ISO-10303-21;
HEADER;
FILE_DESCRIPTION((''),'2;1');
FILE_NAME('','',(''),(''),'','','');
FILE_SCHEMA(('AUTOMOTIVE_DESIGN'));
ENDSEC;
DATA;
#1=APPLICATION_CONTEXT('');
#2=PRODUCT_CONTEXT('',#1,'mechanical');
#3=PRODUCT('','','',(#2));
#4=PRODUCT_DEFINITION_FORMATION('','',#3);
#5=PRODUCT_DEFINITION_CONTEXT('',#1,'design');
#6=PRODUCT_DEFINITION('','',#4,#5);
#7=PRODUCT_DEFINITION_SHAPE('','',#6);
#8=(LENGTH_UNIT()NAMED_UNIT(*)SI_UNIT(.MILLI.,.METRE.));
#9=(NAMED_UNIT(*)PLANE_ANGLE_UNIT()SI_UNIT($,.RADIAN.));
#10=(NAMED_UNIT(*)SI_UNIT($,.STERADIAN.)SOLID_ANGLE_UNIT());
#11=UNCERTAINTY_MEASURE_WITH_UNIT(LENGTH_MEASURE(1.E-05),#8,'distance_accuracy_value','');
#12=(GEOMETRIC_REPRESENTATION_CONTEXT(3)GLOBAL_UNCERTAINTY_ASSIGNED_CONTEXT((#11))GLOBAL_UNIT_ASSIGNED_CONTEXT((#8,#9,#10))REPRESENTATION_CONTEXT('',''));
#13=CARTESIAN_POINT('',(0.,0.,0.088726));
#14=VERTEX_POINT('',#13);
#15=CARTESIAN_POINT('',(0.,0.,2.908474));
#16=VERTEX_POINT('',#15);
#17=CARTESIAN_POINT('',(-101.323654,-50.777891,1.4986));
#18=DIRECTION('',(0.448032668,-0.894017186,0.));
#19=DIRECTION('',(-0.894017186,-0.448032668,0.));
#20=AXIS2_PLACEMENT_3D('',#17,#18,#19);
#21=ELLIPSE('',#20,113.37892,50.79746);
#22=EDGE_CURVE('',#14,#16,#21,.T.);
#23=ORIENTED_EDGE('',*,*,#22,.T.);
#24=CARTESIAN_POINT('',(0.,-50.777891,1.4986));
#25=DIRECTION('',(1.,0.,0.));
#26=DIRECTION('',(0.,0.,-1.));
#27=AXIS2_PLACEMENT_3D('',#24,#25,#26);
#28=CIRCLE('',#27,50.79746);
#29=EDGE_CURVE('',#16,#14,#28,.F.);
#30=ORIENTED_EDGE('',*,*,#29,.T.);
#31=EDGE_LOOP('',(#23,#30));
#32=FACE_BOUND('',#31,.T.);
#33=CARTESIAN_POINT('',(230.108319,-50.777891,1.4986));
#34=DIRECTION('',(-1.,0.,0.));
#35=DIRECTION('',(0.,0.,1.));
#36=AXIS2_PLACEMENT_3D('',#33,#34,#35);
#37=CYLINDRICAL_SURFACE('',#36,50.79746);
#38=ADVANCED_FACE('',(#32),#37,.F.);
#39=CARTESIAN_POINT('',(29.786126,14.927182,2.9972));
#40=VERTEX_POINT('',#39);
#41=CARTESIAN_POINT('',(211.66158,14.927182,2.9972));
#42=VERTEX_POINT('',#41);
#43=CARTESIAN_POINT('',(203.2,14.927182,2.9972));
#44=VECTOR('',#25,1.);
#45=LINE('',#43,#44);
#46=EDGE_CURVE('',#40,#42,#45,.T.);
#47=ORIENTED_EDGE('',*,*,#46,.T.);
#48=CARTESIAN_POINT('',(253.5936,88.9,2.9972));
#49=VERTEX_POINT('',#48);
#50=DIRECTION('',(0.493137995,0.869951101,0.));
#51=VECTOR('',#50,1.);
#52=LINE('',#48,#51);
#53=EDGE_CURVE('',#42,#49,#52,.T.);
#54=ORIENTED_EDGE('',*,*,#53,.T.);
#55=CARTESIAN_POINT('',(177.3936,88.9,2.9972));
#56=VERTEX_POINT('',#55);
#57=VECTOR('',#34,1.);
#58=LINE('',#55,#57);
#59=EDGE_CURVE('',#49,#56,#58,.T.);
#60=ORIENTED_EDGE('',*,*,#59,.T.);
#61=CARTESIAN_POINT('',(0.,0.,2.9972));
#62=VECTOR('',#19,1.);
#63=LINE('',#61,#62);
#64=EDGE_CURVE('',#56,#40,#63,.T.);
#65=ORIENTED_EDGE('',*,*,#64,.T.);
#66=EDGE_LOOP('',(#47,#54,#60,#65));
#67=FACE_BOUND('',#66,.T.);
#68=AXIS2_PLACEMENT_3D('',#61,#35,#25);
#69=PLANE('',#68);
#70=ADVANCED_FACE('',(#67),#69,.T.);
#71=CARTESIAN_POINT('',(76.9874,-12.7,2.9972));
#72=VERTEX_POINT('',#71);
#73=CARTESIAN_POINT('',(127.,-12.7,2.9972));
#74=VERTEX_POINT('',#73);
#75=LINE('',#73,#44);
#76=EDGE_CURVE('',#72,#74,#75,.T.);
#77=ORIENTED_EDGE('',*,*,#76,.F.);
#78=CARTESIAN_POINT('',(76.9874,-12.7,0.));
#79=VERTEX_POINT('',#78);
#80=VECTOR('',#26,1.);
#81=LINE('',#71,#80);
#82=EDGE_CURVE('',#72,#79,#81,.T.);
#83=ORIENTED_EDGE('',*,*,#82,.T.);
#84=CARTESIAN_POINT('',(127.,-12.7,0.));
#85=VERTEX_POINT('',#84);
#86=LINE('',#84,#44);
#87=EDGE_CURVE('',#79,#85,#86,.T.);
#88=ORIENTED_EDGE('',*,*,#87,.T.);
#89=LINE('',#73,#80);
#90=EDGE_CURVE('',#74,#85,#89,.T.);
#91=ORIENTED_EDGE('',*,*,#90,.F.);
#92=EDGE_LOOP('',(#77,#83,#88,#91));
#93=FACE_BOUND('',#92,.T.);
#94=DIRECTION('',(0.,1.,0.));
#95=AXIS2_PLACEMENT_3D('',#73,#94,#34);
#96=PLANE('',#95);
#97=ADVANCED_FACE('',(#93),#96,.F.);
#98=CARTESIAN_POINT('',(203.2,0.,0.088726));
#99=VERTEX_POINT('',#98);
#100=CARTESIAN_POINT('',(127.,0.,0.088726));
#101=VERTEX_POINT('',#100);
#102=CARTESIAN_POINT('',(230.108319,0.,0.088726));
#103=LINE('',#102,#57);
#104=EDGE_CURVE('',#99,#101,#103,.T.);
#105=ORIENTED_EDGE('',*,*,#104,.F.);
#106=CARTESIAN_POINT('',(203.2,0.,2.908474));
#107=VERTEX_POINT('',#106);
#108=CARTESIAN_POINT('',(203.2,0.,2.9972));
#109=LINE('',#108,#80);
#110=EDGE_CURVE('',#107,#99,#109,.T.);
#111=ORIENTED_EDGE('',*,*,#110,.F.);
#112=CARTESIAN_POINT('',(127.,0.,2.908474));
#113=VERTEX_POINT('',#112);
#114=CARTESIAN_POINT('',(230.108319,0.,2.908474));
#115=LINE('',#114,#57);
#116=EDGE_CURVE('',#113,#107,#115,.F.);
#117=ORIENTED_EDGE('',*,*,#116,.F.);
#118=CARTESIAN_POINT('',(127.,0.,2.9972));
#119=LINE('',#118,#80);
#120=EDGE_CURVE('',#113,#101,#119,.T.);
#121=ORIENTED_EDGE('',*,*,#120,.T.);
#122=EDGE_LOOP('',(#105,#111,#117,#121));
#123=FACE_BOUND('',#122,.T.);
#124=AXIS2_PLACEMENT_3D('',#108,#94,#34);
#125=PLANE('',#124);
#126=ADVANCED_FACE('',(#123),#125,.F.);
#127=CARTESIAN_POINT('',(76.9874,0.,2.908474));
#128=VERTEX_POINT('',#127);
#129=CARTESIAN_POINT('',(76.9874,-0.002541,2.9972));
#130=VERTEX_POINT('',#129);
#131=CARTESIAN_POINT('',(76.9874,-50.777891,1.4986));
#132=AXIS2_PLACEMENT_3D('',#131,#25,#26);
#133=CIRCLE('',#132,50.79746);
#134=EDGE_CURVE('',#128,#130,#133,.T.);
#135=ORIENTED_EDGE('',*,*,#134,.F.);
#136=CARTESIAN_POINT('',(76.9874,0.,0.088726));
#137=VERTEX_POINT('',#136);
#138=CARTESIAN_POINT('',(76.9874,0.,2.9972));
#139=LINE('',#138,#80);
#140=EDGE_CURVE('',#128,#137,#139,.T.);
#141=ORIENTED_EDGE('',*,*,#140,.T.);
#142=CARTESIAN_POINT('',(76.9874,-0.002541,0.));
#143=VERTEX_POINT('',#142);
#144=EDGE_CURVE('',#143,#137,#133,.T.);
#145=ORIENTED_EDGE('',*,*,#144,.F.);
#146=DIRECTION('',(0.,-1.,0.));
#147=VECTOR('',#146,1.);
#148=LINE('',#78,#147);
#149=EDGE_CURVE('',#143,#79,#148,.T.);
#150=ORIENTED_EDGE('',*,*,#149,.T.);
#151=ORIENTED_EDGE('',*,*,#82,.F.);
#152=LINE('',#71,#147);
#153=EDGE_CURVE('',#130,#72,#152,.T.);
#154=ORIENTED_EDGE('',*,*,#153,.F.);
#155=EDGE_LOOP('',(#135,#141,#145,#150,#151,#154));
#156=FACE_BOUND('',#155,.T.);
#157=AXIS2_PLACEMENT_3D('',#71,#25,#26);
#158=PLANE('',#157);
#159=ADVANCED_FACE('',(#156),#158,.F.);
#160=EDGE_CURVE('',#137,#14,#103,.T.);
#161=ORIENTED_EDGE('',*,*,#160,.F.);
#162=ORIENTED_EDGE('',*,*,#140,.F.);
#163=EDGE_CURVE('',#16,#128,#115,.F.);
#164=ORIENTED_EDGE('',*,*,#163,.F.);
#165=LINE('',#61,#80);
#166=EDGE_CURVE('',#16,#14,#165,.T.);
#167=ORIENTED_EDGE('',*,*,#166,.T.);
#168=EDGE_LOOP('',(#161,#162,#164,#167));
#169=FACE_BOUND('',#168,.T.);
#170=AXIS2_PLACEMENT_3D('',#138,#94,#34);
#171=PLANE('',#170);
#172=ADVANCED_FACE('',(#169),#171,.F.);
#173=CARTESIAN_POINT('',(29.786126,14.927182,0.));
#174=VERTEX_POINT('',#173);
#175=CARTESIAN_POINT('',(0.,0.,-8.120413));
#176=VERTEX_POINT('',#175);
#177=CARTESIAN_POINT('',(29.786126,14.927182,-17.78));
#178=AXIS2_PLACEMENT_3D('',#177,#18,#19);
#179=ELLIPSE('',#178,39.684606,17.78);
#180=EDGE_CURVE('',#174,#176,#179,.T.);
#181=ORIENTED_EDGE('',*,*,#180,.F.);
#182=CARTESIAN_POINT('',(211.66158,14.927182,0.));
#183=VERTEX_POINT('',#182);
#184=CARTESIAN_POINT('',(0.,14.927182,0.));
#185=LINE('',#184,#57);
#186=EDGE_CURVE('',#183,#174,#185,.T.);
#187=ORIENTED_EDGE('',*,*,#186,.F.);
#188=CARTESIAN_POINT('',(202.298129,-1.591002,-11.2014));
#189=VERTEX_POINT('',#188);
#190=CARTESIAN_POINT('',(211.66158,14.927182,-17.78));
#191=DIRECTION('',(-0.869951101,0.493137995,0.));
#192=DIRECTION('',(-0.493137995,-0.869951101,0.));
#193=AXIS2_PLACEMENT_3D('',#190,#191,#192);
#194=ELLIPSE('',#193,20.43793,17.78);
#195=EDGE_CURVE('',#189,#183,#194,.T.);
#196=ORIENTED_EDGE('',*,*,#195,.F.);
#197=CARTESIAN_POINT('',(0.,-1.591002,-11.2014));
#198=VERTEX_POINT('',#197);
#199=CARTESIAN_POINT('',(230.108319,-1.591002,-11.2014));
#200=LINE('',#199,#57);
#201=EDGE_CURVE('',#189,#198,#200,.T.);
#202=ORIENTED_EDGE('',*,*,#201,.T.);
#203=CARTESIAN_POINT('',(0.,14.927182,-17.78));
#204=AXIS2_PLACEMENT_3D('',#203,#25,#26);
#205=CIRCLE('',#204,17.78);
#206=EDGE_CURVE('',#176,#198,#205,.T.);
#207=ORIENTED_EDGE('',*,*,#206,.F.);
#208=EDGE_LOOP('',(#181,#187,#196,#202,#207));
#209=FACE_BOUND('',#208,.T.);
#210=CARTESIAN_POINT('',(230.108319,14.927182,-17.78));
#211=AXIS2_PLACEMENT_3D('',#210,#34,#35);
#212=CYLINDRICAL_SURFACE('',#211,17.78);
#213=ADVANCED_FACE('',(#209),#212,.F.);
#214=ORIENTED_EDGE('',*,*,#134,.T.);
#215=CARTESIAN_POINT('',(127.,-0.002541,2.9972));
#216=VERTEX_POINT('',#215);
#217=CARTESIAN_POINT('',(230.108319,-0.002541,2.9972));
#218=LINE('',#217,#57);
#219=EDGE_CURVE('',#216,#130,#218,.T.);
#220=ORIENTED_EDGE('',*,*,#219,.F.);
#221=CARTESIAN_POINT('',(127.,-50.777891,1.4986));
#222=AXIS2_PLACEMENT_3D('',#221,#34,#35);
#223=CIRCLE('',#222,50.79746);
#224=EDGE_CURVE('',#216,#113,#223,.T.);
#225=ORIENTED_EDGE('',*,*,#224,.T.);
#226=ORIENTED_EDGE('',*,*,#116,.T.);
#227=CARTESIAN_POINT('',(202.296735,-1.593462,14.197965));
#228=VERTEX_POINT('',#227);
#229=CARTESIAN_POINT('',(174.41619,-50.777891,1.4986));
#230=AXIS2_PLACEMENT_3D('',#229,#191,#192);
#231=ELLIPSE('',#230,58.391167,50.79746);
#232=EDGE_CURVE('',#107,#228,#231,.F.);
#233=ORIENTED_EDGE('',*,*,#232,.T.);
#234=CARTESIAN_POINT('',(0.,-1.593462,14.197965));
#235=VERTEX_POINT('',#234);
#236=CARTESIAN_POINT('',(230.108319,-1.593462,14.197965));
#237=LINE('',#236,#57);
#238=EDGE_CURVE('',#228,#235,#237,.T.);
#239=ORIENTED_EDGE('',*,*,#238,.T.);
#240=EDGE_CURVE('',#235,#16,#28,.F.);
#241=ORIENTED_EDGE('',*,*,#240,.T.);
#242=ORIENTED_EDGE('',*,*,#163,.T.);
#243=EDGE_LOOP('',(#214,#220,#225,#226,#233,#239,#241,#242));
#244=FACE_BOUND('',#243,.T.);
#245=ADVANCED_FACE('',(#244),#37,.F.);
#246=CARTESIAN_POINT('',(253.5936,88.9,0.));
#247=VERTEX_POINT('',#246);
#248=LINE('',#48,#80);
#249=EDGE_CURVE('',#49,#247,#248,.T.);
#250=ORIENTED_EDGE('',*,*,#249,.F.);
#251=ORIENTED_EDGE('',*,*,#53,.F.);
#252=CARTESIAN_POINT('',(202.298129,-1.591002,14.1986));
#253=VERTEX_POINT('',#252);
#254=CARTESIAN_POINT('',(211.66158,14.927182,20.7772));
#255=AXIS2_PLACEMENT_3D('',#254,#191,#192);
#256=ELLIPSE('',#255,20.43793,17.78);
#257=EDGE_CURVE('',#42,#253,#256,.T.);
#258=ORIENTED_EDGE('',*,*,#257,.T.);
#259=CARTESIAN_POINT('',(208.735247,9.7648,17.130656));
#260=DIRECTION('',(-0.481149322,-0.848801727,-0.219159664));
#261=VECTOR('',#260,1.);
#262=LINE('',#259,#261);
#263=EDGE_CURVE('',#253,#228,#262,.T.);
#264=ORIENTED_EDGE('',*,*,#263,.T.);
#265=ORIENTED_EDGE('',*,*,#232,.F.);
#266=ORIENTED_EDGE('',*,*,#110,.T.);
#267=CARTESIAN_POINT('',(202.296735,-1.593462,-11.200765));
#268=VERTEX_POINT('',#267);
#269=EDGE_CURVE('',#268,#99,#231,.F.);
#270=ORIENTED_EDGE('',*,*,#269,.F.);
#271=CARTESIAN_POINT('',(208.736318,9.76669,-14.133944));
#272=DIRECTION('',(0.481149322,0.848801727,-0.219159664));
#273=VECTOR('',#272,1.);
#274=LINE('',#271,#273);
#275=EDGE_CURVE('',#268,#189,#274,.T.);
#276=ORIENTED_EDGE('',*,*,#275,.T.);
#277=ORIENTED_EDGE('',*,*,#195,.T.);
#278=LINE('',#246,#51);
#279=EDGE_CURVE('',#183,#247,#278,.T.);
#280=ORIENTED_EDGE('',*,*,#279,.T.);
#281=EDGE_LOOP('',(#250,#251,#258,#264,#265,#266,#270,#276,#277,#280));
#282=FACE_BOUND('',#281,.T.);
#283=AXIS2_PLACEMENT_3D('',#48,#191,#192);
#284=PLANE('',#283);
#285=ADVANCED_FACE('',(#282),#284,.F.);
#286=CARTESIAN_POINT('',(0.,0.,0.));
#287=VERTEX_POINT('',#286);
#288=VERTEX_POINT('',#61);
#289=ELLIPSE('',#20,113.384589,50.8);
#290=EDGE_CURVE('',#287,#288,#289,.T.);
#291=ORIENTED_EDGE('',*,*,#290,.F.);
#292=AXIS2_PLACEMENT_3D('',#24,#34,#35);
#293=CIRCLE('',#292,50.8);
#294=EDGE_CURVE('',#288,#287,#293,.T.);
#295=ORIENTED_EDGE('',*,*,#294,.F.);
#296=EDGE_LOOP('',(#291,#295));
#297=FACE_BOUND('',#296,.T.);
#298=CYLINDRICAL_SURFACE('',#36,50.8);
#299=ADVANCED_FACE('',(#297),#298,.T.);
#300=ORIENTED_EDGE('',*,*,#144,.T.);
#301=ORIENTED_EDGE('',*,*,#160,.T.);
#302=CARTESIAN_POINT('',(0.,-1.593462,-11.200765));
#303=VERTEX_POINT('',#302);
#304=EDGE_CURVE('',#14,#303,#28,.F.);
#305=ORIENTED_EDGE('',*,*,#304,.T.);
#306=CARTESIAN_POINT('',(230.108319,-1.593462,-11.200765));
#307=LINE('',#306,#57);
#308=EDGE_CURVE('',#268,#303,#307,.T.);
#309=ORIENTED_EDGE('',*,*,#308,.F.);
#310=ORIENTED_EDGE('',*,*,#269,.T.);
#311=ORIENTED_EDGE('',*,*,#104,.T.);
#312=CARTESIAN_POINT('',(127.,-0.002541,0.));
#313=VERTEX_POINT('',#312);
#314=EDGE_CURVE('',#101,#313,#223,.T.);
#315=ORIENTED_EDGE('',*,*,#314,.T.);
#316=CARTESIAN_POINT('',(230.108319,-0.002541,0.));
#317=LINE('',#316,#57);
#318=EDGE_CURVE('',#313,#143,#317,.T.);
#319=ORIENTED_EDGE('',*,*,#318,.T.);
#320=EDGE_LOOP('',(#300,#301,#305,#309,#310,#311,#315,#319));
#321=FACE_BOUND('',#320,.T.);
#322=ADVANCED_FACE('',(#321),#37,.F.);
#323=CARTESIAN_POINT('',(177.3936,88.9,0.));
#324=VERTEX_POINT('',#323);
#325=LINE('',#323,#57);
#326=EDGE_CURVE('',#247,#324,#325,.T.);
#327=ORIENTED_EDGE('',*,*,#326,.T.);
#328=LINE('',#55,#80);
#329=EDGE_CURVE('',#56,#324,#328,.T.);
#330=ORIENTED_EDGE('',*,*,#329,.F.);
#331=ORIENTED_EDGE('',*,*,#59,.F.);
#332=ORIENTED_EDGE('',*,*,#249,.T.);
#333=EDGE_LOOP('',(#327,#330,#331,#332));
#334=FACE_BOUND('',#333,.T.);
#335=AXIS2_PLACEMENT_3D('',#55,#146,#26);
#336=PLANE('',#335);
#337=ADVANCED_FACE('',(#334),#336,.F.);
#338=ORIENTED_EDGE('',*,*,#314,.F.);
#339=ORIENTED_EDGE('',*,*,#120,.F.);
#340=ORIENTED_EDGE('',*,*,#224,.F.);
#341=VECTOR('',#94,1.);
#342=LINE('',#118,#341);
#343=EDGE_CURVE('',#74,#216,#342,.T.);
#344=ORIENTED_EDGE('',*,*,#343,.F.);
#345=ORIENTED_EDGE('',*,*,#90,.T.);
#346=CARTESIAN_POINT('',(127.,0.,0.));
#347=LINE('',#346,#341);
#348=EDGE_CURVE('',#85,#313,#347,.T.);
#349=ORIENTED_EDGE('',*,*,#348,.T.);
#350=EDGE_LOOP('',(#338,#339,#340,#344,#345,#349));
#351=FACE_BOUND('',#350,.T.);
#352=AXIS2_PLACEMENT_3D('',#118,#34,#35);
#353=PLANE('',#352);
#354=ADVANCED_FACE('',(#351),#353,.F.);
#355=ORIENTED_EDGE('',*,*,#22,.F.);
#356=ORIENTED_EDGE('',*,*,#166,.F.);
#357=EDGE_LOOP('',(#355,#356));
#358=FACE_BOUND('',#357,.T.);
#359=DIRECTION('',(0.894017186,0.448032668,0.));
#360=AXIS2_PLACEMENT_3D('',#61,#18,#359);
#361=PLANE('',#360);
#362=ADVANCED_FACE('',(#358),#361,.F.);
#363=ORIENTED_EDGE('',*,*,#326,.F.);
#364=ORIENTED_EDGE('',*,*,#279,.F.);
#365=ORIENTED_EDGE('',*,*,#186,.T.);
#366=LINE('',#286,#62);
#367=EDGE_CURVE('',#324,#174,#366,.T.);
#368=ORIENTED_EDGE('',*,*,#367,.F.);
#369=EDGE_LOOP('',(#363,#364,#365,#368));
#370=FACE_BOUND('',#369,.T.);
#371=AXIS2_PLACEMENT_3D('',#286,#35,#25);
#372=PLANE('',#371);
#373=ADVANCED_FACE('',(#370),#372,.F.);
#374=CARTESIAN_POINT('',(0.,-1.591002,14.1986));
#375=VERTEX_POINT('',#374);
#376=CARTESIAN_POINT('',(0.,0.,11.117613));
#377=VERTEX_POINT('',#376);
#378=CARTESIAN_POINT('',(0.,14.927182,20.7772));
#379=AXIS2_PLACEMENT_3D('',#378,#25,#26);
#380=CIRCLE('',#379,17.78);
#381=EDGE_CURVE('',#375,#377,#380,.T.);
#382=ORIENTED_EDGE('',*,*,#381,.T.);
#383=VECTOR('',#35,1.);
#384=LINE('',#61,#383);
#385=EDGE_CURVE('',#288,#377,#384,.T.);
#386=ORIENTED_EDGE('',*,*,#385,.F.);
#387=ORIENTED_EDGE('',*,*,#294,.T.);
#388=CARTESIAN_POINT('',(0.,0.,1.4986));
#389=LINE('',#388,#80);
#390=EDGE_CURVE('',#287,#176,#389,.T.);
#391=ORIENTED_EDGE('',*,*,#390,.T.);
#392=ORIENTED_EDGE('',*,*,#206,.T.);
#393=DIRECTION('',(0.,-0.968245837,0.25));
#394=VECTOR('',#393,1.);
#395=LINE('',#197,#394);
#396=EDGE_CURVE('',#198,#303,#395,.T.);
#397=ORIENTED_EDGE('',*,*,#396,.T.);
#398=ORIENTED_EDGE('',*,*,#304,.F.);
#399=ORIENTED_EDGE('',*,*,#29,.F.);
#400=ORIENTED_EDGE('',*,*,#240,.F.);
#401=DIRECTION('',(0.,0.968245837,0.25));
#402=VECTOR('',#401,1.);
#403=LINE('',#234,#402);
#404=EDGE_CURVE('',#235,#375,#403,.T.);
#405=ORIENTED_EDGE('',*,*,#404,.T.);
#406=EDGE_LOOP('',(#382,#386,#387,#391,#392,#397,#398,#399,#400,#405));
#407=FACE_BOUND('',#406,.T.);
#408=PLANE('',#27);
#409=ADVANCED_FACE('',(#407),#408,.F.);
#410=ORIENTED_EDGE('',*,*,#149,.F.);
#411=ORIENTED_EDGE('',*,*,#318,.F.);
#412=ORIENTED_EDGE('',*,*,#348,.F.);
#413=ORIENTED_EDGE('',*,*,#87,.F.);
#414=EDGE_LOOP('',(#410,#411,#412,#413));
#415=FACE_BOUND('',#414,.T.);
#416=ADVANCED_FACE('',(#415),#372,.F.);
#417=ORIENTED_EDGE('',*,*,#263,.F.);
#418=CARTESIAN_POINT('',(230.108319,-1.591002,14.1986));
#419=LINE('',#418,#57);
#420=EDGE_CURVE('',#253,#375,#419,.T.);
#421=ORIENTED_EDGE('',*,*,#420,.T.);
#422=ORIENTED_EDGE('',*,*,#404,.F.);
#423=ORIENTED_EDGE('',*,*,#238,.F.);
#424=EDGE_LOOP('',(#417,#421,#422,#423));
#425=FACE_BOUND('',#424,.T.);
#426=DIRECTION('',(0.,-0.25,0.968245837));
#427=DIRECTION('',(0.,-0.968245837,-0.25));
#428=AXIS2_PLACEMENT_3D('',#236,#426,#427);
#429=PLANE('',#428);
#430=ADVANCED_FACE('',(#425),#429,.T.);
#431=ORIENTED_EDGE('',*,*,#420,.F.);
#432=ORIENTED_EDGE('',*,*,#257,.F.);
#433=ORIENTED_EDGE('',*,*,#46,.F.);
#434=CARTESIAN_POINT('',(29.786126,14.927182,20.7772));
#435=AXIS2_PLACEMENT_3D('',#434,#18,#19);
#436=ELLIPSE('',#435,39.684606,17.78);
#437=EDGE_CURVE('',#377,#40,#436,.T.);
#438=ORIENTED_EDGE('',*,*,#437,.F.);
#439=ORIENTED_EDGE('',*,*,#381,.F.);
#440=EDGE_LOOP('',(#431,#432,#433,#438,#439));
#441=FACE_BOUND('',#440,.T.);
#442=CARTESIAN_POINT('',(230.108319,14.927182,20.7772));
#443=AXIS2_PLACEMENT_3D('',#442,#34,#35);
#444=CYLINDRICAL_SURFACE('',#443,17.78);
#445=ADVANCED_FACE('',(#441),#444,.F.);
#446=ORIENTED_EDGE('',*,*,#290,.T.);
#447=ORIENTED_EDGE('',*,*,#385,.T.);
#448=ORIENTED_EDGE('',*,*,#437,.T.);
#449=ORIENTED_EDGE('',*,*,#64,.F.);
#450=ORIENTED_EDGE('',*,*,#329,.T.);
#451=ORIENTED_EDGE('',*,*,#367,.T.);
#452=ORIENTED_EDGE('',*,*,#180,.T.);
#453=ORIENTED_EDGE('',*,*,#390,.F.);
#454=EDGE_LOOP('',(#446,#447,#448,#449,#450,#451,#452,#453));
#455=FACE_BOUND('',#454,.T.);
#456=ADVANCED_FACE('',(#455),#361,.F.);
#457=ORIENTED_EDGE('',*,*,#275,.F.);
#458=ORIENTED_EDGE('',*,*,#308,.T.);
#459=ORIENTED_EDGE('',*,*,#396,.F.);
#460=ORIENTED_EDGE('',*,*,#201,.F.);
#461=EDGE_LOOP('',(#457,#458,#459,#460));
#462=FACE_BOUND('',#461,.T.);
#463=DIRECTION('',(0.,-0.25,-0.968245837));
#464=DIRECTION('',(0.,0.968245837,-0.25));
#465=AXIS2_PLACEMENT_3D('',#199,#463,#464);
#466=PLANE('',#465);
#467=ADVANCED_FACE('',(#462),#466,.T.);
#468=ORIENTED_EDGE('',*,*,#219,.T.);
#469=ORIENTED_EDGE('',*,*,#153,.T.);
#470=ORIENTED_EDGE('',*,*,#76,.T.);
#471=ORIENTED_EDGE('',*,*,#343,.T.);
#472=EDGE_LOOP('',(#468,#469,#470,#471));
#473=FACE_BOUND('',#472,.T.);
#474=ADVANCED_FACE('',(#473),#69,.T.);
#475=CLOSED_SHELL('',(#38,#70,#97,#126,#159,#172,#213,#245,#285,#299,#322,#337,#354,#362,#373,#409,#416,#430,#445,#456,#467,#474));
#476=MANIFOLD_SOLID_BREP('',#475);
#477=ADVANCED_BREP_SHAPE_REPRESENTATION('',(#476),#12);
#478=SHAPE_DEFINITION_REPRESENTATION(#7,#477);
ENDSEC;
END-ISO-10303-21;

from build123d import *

# Parameters (mm, degrees)
BOSS_EXTRUDE1_DEPTH = 2.9972
EXTRUDE_THIN1_REACH = 270.741
FILLET1_R           = 17.78


with BuildPart() as part:
    # Sketch1 → Boss-Extrude1 (new body)
    with BuildSketch(Plane.XY):
        Polygon((0, 0), (177.3936, 88.9), (253.5936, 88.9), (203.2, 0), (127, 0), (127, -12.7), (76.9874, -12.7), (76.9874, 0), align=None)
    extrude(amount=BOSS_EXTRUDE1_DEPTH)

    # Extrude-Thin1: up to this plane
    extrude_thin1_end = Plane(origin=(253.5936, 88.9, 2.9972), z_dir=(-0.8699511006630548, 0.4931379953472858, 0))
    # Sketch2 → Extrude-Thin1 (add, up to the surface)
    with BuildSketch(Plane(origin=(0, 0, 0), x_dir=(0, 0, -1), z_dir=(1, 0, 0)), mode=Mode.PRIVATE) as extrude_thin1_sk1:
        with BuildLine():
            ThreePointArc((-14.1986, -1.591002342), (-1.4986, 0.022109161), (11.2014, -1.591002342))
            Line((11.2014, -1.591002342), (11.200765, -1.593461686))
            ThreePointArc((11.200765, -1.593461686), (-1.4986, 0.019569161), (-14.197965, -1.593461686))
            Line((-14.197965, -1.593461686), (-14.1986, -1.591002342))
        make_face()
    extrude_thin1_tool1 = split(extrude(extrude_thin1_sk1.sketch, amount=EXTRUDE_THIN1_REACH, mode=Mode.PRIVATE), bisect_by=extrude_thin1_end, keep=Keep.BOTH, mode=Mode.PRIVATE)
    add(extrude_thin1_tool1.solids().sort_by_distance((0, -1.528604, -10.954651))[0])

    # Fillet1
    # the kernel refuses this fillet: 17.78 mm, written as the material it adds along each edge
    with BuildSketch(Plane(origin=(0, 0, 0), x_dir=(0, -0.1406246122093386, -0.9900629871078774), z_dir=(1, 0, 0))) as fillet1_piece_1_section:
        with BuildLine():
            CenterArc((15.504190696, 17.279156247), FILLET1_R, 188.083991465, 68.284382717)
            Line((-2.099129215, 14.778850642), (0, 0))
            ThreePointArc((0, 0), (5.656912816, 0.315949673), (11.313825631, 0))
        make_face()
    fillet1_piece_1 = extrude(amount=240.517955612, mode=Mode.PRIVATE)
    fillet1_piece_1 = split(fillet1_piece_1, bisect_by=Plane(origin=(86.561023995, 43.379665519, -3.035000441), z_dir=(0.4480326676326847, -0.89401718592762, 0)), keep=Keep.TOP, mode=Mode.PRIVATE)
    fillet1_piece_1 = split(fillet1_piece_1, bisect_by=Plane(origin=(181.635497998, -38.042216233, -3.035000441), z_dir=(-0.8699511006630548, 0.4931379953472858, 0)), keep=Keep.TOP, mode=Mode.PRIVATE)
    add(fillet1_piece_1)
    with BuildSketch(Plane(origin=(240.517955612, 0, 2.9972), x_dir=(0, 1, 0), z_dir=(-1, 0, 0))) as fillet1_piece_2_section:
        with BuildLine():
            CenterArc((14.927182245, -17.78), FILLET1_R, 90, 68.284382717)
            ThreePointArc((-1.591002342, -11.2014), (-0.482691094, -5.6451303), (0, 0))
            Line((0, 0), (14.927182245, 0))
        make_face()
    fillet1_piece_2 = extrude(amount=240.517955612, mode=Mode.PRIVATE)
    fillet1_piece_2 = split(fillet1_piece_2, bisect_by=Plane(origin=(86.561023995, 43.379665519, 6.032200441), z_dir=(0.4480326676326847, -0.89401718592762, 0)), keep=Keep.TOP, mode=Mode.PRIVATE)
    fillet1_piece_2 = split(fillet1_piece_2, bisect_by=Plane(origin=(181.635497998, -38.042216233, 6.032200441), z_dir=(-0.8699511006630548, 0.4931379953472858, 0)), keep=Keep.TOP, mode=Mode.PRIVATE)
    add(fillet1_piece_2)


solid = part.part
